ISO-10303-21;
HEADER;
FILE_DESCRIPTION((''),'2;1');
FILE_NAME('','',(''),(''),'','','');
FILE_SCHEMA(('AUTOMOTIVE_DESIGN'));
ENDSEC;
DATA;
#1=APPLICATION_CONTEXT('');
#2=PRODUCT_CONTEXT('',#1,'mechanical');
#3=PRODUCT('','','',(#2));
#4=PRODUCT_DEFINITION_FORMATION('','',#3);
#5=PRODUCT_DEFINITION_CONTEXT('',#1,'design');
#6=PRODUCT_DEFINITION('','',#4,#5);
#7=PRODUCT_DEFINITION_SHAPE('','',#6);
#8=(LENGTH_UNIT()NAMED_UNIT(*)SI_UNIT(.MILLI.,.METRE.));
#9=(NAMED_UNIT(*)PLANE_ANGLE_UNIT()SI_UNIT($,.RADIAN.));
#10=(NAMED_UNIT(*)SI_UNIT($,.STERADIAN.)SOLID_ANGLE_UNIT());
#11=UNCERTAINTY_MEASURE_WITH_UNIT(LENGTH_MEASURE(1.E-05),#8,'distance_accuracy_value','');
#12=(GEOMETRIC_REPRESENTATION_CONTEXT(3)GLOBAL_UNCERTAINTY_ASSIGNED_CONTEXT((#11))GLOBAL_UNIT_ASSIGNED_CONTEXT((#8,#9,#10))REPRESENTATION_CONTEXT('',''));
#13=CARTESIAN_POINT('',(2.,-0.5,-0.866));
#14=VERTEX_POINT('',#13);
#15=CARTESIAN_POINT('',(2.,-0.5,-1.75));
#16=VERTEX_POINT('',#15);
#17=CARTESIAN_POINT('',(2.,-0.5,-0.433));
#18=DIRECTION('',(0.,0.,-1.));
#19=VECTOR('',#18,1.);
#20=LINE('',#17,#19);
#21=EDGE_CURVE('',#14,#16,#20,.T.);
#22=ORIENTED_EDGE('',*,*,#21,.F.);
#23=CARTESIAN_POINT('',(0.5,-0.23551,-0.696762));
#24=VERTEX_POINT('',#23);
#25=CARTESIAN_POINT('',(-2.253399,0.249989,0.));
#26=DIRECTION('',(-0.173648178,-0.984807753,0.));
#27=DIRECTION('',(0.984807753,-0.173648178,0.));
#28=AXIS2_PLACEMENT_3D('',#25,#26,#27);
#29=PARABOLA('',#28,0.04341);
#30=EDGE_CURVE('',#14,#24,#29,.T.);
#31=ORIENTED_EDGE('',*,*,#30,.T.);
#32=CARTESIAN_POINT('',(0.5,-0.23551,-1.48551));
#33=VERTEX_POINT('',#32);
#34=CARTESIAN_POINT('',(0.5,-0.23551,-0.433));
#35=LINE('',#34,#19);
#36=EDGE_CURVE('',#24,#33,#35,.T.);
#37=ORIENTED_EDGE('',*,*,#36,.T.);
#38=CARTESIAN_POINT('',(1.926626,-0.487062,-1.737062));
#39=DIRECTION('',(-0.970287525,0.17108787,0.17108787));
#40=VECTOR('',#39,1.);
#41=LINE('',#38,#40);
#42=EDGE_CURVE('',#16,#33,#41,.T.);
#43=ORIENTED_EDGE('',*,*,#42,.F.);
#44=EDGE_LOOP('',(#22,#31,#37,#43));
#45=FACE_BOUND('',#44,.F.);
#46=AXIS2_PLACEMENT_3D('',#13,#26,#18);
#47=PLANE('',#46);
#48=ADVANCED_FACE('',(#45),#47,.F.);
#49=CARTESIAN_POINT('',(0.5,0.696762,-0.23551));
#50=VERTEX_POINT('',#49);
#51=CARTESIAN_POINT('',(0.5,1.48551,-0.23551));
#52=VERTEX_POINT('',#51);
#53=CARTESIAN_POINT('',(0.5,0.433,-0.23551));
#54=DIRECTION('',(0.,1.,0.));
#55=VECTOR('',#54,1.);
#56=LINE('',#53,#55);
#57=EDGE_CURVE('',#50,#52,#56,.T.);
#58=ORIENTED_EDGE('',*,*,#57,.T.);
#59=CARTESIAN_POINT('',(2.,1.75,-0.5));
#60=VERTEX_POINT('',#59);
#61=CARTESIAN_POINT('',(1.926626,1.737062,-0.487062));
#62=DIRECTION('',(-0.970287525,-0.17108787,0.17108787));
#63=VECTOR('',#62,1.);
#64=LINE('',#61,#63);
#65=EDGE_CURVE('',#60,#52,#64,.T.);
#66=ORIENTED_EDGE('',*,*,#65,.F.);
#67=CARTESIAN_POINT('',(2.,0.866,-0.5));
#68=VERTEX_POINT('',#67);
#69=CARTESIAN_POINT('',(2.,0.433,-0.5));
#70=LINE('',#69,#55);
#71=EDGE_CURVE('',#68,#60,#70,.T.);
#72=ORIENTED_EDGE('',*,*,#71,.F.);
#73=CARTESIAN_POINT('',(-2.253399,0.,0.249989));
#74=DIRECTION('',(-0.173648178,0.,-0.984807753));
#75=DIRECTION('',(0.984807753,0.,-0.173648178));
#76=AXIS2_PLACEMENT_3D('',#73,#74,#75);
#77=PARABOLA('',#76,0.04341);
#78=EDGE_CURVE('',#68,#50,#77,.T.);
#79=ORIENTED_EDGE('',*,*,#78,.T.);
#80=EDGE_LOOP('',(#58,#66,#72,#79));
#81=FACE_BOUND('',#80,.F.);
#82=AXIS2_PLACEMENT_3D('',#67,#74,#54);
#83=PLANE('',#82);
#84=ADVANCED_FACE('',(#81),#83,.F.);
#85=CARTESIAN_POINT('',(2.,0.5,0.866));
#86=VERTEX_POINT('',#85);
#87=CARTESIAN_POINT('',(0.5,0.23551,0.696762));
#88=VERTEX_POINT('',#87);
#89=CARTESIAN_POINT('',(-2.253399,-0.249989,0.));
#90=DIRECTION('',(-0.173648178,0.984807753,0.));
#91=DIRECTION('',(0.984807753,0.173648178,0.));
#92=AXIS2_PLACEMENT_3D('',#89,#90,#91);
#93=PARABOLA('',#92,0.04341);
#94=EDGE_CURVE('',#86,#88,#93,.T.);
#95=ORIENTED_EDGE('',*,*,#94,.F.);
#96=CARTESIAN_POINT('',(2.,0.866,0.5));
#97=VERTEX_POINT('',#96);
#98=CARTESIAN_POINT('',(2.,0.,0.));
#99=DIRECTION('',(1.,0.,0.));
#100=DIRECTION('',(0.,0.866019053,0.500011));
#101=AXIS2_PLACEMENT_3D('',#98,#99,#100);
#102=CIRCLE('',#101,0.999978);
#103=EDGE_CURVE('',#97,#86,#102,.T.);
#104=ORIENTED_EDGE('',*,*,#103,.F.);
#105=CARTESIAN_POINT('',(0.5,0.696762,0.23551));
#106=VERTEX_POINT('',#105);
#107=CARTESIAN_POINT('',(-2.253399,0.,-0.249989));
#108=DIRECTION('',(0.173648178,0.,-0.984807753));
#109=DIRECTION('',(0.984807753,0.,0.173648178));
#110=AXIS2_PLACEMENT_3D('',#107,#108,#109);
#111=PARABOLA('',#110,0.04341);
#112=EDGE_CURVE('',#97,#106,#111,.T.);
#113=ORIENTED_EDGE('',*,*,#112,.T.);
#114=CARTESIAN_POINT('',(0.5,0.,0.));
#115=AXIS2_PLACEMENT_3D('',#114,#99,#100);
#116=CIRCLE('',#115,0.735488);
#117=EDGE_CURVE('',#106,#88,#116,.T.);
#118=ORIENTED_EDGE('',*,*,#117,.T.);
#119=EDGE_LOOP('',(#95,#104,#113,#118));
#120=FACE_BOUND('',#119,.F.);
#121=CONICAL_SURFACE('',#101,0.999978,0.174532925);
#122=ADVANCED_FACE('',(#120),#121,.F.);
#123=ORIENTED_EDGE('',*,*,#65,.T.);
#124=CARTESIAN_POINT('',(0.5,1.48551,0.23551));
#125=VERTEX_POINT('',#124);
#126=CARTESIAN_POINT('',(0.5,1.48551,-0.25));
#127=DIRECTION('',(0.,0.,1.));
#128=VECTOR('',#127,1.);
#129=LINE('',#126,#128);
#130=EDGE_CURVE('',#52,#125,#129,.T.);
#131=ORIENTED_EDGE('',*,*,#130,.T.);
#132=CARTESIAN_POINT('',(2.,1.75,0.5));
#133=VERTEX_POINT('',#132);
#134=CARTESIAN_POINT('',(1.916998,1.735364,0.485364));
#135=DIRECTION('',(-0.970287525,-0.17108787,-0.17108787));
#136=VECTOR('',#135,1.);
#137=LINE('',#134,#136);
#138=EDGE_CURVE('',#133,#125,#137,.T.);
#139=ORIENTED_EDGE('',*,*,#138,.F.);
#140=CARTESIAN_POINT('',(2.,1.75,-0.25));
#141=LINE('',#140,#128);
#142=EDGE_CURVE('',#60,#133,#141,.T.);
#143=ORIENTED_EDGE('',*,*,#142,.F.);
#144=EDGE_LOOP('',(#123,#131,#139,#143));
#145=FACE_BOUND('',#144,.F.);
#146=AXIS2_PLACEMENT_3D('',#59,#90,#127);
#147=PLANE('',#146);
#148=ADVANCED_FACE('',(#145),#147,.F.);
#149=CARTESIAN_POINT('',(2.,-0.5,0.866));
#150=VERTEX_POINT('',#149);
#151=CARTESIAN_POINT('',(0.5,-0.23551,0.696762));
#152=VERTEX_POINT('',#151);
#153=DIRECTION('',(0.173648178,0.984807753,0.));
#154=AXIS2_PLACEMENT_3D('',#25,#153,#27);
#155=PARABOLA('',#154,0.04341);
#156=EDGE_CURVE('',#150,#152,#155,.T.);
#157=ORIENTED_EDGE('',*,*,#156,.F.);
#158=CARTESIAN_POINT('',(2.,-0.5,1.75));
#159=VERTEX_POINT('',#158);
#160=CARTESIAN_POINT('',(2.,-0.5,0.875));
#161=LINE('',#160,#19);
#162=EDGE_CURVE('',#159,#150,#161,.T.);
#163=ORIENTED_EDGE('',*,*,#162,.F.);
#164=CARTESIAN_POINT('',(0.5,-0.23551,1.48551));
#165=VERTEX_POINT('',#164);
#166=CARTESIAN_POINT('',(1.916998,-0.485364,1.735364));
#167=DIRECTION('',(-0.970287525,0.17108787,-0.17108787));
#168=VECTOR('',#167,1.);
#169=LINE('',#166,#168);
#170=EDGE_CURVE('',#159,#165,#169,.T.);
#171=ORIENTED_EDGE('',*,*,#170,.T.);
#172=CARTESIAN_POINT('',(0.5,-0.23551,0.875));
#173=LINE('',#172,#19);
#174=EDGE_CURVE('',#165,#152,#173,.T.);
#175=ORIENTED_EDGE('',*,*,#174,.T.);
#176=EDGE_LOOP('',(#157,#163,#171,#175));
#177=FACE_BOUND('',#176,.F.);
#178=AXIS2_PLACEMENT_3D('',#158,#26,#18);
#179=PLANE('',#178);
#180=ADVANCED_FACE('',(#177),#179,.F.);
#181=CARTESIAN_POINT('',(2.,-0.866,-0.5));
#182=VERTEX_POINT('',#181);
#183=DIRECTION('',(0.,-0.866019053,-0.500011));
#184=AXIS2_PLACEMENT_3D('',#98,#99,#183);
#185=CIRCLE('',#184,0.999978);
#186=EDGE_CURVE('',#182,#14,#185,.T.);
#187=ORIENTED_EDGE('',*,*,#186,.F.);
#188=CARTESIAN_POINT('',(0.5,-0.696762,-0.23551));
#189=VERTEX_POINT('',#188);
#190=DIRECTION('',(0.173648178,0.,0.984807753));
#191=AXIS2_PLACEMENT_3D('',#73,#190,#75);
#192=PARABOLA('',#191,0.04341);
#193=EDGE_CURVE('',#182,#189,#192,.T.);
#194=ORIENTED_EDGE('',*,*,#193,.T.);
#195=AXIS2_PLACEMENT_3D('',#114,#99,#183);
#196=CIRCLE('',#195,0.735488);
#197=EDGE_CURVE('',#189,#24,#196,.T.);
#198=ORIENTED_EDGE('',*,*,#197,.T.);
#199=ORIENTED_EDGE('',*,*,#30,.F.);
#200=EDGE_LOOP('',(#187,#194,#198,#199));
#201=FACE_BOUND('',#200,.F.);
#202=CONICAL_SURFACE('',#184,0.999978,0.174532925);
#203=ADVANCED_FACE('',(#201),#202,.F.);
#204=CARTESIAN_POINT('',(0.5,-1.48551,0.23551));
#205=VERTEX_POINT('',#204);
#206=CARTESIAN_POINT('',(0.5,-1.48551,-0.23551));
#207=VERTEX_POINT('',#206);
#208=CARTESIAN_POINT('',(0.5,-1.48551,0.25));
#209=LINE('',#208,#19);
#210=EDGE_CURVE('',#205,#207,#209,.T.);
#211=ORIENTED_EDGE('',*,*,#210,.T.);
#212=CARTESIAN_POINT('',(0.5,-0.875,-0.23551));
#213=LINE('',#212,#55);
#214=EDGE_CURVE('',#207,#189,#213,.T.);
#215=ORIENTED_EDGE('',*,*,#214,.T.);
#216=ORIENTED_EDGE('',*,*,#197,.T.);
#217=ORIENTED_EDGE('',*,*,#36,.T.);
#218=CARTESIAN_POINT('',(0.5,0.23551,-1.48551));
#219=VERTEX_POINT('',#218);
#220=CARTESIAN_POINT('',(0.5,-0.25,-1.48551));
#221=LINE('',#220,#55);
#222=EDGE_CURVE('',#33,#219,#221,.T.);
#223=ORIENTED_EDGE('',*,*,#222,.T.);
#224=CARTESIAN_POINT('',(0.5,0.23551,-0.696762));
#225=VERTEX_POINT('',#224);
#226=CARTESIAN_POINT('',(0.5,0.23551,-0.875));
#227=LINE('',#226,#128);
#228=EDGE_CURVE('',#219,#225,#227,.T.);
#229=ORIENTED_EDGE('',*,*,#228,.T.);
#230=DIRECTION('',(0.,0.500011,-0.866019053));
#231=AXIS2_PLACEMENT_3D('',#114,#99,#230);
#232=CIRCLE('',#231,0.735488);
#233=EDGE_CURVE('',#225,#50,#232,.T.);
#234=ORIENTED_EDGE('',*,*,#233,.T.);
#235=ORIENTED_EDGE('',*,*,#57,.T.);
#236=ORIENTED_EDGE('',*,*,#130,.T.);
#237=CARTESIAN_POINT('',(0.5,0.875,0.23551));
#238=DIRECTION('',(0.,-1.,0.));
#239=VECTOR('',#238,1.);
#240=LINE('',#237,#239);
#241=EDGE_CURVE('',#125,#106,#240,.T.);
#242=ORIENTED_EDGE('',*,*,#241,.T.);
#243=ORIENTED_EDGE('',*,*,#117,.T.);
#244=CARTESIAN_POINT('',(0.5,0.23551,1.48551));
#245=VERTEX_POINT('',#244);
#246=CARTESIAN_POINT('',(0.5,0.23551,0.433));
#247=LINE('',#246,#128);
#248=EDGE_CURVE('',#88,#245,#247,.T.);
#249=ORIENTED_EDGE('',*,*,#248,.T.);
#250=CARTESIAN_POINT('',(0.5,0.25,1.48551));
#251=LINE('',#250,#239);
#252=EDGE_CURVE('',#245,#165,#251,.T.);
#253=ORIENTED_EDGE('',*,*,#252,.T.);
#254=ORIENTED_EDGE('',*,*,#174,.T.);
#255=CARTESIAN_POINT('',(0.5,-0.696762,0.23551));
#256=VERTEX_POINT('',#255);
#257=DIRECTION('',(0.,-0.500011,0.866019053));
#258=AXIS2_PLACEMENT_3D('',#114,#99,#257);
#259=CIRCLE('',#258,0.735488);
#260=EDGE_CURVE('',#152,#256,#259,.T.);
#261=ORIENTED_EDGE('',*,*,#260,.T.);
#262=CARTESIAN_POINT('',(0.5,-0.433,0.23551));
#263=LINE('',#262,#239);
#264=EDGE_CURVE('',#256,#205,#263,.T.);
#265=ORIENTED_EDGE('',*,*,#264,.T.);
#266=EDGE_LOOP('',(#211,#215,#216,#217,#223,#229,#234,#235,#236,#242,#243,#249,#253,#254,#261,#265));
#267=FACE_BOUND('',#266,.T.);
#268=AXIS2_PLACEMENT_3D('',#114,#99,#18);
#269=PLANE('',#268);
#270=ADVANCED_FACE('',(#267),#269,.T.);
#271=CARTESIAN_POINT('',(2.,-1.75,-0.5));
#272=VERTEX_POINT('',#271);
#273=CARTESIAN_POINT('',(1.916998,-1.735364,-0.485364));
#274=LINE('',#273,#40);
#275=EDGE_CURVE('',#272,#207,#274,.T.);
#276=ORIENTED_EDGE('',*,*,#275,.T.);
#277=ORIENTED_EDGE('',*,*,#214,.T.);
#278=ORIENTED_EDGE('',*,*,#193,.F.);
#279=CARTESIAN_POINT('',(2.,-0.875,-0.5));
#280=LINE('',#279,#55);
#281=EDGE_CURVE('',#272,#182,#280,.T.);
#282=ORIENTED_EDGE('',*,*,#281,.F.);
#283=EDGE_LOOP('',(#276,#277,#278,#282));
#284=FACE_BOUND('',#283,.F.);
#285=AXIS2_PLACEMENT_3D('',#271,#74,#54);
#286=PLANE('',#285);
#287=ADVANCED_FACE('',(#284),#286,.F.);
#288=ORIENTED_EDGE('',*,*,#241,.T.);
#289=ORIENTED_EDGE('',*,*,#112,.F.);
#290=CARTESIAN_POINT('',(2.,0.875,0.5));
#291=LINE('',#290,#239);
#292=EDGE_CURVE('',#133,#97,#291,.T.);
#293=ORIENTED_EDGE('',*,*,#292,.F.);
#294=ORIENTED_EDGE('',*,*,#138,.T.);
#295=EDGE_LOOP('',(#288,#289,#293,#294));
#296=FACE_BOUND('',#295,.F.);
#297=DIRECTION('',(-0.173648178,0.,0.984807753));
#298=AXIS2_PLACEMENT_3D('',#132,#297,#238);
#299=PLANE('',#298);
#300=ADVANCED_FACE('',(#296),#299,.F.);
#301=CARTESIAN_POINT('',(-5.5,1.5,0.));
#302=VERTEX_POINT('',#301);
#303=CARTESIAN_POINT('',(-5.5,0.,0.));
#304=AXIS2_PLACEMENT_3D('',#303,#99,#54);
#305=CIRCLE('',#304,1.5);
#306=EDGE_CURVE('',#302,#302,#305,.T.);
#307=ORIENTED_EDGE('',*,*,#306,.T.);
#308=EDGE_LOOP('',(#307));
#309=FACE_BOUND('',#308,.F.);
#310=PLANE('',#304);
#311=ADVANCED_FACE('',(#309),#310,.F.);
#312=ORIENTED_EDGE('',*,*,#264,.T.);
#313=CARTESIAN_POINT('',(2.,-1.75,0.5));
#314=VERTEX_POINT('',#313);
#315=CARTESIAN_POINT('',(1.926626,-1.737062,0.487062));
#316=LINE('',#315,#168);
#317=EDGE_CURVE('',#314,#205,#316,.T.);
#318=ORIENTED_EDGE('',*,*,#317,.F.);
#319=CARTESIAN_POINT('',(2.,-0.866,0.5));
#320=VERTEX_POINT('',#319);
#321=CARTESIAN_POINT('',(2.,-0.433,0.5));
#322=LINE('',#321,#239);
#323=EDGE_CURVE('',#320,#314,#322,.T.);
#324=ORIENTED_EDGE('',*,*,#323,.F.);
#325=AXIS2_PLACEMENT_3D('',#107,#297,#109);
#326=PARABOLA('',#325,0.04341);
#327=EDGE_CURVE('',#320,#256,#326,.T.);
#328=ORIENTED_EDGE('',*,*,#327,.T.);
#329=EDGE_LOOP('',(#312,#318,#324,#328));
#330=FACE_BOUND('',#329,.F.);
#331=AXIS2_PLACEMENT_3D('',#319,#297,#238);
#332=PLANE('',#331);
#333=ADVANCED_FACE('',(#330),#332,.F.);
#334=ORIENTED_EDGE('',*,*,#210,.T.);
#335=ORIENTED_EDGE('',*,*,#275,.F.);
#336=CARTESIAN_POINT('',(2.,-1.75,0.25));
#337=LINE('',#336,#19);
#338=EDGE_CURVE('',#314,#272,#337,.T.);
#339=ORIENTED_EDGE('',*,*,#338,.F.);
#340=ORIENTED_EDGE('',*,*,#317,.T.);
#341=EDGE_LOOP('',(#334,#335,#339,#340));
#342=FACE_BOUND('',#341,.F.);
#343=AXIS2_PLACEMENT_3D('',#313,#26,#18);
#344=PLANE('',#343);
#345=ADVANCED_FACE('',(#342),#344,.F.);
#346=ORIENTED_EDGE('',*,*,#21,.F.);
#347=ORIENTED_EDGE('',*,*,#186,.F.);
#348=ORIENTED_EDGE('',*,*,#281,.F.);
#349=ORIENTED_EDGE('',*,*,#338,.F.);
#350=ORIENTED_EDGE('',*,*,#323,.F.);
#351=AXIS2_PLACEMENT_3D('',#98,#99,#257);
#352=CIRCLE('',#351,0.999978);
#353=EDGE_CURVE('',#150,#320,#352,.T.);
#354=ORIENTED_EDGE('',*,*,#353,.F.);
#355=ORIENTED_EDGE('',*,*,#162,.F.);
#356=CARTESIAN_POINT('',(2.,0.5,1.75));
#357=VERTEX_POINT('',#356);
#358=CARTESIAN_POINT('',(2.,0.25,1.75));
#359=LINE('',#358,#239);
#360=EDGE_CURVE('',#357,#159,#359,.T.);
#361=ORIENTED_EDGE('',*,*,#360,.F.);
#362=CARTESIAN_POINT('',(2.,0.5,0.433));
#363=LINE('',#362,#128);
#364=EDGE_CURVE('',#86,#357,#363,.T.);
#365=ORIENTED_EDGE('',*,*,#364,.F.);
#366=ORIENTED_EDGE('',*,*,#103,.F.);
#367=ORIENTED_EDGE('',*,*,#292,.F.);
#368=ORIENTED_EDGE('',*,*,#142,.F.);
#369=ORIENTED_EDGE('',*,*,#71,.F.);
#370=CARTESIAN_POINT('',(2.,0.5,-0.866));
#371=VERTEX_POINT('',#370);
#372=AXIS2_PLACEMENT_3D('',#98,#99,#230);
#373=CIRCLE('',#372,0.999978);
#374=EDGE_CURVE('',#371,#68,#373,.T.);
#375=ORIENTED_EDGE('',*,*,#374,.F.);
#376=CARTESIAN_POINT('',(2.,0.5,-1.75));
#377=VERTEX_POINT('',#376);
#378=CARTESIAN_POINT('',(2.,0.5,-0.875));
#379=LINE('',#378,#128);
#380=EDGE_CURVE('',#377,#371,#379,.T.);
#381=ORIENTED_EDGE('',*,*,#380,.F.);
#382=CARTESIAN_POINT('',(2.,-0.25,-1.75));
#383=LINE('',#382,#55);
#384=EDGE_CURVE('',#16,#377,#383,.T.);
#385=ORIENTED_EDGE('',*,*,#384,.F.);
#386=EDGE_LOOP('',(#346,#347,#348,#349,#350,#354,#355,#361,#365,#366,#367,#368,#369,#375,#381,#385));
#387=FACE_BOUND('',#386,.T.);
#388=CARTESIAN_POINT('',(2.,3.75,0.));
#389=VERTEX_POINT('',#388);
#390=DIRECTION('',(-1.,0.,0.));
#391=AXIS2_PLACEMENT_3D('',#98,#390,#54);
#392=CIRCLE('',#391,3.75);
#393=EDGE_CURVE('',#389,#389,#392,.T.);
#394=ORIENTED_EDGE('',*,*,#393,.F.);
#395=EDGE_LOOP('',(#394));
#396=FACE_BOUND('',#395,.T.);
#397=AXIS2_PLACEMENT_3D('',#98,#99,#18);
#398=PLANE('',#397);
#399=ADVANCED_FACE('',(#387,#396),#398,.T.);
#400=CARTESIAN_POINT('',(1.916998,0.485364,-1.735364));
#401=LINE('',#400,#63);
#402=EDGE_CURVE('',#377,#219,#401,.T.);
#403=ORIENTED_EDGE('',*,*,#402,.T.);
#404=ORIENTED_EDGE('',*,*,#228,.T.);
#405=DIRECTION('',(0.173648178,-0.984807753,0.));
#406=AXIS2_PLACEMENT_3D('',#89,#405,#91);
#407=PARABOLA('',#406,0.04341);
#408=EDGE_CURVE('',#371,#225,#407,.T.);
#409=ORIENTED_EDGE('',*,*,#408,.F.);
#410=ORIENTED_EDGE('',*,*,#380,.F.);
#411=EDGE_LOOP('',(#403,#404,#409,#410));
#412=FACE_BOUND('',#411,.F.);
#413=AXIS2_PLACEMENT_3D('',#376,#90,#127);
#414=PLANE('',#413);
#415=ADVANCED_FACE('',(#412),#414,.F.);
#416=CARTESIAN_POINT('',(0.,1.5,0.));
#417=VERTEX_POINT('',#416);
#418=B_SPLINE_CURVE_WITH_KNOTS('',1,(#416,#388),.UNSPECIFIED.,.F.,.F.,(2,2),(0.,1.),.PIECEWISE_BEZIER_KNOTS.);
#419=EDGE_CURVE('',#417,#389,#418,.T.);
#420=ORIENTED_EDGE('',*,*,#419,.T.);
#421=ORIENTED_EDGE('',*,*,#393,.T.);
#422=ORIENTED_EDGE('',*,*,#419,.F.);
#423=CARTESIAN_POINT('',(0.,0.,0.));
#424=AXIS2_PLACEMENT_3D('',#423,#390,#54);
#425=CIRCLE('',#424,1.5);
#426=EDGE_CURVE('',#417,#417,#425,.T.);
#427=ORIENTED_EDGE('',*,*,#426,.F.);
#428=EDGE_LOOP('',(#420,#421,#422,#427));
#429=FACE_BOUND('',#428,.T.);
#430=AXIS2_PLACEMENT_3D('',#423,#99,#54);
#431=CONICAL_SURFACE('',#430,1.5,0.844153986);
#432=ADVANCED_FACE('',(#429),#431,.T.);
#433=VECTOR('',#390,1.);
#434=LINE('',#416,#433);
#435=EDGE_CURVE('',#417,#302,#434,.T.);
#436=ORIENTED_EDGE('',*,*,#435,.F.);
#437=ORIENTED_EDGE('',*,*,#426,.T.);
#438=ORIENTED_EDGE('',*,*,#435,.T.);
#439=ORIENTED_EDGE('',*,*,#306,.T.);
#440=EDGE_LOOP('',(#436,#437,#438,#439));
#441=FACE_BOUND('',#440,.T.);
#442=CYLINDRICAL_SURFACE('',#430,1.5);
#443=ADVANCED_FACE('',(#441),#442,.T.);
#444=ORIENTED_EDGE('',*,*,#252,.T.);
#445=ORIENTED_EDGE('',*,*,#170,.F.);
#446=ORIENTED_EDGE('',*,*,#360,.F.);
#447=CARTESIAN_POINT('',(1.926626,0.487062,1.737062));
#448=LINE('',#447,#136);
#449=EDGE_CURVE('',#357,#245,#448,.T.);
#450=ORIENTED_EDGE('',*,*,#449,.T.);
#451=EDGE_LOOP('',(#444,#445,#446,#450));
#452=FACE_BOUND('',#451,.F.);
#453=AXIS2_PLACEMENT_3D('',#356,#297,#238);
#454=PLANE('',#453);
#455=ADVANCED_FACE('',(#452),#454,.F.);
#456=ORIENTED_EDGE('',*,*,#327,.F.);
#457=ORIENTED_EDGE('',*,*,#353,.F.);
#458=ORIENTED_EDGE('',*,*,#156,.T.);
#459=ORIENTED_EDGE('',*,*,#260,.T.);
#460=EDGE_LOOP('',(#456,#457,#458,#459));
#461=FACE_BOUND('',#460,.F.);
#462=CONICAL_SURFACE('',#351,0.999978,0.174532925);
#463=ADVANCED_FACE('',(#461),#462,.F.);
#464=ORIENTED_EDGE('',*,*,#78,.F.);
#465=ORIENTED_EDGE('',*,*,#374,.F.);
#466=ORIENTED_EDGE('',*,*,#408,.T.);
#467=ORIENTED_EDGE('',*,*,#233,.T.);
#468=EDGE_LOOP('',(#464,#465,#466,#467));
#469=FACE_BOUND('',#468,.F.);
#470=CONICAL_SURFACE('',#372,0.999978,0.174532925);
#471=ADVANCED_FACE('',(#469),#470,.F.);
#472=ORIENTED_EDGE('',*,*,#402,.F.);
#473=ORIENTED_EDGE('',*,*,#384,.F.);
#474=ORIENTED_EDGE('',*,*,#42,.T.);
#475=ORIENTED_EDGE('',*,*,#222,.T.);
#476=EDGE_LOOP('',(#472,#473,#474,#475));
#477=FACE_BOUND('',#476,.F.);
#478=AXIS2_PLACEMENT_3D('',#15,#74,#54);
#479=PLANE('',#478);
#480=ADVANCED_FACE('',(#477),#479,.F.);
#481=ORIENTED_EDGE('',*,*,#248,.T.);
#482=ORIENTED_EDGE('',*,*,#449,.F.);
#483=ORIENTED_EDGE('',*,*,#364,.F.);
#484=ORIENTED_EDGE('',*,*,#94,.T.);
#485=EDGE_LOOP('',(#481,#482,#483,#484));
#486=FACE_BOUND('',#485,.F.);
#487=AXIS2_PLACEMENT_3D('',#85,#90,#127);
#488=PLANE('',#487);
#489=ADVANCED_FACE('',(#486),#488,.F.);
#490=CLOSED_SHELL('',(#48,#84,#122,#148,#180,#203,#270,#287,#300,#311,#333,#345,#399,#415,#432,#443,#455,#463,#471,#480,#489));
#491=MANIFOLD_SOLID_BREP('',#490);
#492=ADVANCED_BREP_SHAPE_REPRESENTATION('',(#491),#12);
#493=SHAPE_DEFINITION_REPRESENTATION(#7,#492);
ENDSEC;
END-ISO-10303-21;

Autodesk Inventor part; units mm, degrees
ref_plane "YZ Plane" through (0, 0, 0) normal (1, 0, 0) x (0, 1, 0)
ref_plane "XZ Plane" through (0, 0, 0) normal (0, 1, 0) x (-1, 0, 0)
sketch "Sketch1" plane through (0, 0, 0) normal (1, 0, 0) x (0, 1, 0)
  circle A0 centre (0, 0) radius 1.5
  dimension "d0" = 3
extrude "Extrusion1" add sketch "Sketch1" against normal blind 5.5
ref_plane "Work Plane1" through (2, 0, 0) normal (1, 0, 0) x (0, 0, -1)
sketch "Sketch2" plane through (2, 0, 0) normal (1, 0, 0) x (0, 0, -1)
  circle A0 centre (0, 0) radius 3.75
  dimension "d4" = 7.5
loft "Loft1" add profiles "Sketch2" section 1 edges at (0, -1.5, 0)
sketch "Sketch3" plane through (2, 0, 0) normal (1, 0, 0) x (0, 0, -1)
  line L0 (-0.5, -1.75) -> (0.5, -1.75)
  line L1 (0.5, 1.75) -> (-0.5, 1.75)
  line L2 (1.75, -0.5) -> (1.75, 0.5)
  line L3 (-1.75, 0.5) -> (-1.75, -0.5)
  line L4 (0.5, -1.75) -> (0.5, -0.866)
  line L5 (0.5, 0.866) -> (0.5, 1.75)
  line L6 (-1.75, -0.5) -> (-0.866, -0.5)
  line L7 (0.866, -0.5) -> (1.75, -0.5)
  arc A0 (0.5, -0.866) -> (0.866, -0.5) centre (0, 0) ccw
  line L8 (1.75, 0.5) -> (0.866, 0.5)
  line L9 (-0.866, 0.5) -> (-1.75, 0.5)
  line L10 (-0.5, 1.75) -> (-0.5, 0.866)
  line L11 (-0.5, -0.866) -> (-0.5, -1.75)
  arc A1 (0.866, 0.5) -> (0.5, 0.866) centre (0, 0) ccw
  arc A2 (-0.5, 0.866) -> (-0.866, 0.5) centre (0, 0) ccw
  arc A3 (-0.866, -0.5) -> (-0.5, -0.866) centre (0, 0) ccw
  dimension "d9" = 1
  dimension "d10" = 3.5
  dimension "d11" = 1
  dimension "d12" = 3.5
extrude "Extrusion2" cut sketch "Sketch3" against normal blind 1.5 draft -10
thread "Thread1" size "M3x0.5" class "6g" standard "ANSI Metric M Profile" full length
properties part number "Parafuso do Escudo"
